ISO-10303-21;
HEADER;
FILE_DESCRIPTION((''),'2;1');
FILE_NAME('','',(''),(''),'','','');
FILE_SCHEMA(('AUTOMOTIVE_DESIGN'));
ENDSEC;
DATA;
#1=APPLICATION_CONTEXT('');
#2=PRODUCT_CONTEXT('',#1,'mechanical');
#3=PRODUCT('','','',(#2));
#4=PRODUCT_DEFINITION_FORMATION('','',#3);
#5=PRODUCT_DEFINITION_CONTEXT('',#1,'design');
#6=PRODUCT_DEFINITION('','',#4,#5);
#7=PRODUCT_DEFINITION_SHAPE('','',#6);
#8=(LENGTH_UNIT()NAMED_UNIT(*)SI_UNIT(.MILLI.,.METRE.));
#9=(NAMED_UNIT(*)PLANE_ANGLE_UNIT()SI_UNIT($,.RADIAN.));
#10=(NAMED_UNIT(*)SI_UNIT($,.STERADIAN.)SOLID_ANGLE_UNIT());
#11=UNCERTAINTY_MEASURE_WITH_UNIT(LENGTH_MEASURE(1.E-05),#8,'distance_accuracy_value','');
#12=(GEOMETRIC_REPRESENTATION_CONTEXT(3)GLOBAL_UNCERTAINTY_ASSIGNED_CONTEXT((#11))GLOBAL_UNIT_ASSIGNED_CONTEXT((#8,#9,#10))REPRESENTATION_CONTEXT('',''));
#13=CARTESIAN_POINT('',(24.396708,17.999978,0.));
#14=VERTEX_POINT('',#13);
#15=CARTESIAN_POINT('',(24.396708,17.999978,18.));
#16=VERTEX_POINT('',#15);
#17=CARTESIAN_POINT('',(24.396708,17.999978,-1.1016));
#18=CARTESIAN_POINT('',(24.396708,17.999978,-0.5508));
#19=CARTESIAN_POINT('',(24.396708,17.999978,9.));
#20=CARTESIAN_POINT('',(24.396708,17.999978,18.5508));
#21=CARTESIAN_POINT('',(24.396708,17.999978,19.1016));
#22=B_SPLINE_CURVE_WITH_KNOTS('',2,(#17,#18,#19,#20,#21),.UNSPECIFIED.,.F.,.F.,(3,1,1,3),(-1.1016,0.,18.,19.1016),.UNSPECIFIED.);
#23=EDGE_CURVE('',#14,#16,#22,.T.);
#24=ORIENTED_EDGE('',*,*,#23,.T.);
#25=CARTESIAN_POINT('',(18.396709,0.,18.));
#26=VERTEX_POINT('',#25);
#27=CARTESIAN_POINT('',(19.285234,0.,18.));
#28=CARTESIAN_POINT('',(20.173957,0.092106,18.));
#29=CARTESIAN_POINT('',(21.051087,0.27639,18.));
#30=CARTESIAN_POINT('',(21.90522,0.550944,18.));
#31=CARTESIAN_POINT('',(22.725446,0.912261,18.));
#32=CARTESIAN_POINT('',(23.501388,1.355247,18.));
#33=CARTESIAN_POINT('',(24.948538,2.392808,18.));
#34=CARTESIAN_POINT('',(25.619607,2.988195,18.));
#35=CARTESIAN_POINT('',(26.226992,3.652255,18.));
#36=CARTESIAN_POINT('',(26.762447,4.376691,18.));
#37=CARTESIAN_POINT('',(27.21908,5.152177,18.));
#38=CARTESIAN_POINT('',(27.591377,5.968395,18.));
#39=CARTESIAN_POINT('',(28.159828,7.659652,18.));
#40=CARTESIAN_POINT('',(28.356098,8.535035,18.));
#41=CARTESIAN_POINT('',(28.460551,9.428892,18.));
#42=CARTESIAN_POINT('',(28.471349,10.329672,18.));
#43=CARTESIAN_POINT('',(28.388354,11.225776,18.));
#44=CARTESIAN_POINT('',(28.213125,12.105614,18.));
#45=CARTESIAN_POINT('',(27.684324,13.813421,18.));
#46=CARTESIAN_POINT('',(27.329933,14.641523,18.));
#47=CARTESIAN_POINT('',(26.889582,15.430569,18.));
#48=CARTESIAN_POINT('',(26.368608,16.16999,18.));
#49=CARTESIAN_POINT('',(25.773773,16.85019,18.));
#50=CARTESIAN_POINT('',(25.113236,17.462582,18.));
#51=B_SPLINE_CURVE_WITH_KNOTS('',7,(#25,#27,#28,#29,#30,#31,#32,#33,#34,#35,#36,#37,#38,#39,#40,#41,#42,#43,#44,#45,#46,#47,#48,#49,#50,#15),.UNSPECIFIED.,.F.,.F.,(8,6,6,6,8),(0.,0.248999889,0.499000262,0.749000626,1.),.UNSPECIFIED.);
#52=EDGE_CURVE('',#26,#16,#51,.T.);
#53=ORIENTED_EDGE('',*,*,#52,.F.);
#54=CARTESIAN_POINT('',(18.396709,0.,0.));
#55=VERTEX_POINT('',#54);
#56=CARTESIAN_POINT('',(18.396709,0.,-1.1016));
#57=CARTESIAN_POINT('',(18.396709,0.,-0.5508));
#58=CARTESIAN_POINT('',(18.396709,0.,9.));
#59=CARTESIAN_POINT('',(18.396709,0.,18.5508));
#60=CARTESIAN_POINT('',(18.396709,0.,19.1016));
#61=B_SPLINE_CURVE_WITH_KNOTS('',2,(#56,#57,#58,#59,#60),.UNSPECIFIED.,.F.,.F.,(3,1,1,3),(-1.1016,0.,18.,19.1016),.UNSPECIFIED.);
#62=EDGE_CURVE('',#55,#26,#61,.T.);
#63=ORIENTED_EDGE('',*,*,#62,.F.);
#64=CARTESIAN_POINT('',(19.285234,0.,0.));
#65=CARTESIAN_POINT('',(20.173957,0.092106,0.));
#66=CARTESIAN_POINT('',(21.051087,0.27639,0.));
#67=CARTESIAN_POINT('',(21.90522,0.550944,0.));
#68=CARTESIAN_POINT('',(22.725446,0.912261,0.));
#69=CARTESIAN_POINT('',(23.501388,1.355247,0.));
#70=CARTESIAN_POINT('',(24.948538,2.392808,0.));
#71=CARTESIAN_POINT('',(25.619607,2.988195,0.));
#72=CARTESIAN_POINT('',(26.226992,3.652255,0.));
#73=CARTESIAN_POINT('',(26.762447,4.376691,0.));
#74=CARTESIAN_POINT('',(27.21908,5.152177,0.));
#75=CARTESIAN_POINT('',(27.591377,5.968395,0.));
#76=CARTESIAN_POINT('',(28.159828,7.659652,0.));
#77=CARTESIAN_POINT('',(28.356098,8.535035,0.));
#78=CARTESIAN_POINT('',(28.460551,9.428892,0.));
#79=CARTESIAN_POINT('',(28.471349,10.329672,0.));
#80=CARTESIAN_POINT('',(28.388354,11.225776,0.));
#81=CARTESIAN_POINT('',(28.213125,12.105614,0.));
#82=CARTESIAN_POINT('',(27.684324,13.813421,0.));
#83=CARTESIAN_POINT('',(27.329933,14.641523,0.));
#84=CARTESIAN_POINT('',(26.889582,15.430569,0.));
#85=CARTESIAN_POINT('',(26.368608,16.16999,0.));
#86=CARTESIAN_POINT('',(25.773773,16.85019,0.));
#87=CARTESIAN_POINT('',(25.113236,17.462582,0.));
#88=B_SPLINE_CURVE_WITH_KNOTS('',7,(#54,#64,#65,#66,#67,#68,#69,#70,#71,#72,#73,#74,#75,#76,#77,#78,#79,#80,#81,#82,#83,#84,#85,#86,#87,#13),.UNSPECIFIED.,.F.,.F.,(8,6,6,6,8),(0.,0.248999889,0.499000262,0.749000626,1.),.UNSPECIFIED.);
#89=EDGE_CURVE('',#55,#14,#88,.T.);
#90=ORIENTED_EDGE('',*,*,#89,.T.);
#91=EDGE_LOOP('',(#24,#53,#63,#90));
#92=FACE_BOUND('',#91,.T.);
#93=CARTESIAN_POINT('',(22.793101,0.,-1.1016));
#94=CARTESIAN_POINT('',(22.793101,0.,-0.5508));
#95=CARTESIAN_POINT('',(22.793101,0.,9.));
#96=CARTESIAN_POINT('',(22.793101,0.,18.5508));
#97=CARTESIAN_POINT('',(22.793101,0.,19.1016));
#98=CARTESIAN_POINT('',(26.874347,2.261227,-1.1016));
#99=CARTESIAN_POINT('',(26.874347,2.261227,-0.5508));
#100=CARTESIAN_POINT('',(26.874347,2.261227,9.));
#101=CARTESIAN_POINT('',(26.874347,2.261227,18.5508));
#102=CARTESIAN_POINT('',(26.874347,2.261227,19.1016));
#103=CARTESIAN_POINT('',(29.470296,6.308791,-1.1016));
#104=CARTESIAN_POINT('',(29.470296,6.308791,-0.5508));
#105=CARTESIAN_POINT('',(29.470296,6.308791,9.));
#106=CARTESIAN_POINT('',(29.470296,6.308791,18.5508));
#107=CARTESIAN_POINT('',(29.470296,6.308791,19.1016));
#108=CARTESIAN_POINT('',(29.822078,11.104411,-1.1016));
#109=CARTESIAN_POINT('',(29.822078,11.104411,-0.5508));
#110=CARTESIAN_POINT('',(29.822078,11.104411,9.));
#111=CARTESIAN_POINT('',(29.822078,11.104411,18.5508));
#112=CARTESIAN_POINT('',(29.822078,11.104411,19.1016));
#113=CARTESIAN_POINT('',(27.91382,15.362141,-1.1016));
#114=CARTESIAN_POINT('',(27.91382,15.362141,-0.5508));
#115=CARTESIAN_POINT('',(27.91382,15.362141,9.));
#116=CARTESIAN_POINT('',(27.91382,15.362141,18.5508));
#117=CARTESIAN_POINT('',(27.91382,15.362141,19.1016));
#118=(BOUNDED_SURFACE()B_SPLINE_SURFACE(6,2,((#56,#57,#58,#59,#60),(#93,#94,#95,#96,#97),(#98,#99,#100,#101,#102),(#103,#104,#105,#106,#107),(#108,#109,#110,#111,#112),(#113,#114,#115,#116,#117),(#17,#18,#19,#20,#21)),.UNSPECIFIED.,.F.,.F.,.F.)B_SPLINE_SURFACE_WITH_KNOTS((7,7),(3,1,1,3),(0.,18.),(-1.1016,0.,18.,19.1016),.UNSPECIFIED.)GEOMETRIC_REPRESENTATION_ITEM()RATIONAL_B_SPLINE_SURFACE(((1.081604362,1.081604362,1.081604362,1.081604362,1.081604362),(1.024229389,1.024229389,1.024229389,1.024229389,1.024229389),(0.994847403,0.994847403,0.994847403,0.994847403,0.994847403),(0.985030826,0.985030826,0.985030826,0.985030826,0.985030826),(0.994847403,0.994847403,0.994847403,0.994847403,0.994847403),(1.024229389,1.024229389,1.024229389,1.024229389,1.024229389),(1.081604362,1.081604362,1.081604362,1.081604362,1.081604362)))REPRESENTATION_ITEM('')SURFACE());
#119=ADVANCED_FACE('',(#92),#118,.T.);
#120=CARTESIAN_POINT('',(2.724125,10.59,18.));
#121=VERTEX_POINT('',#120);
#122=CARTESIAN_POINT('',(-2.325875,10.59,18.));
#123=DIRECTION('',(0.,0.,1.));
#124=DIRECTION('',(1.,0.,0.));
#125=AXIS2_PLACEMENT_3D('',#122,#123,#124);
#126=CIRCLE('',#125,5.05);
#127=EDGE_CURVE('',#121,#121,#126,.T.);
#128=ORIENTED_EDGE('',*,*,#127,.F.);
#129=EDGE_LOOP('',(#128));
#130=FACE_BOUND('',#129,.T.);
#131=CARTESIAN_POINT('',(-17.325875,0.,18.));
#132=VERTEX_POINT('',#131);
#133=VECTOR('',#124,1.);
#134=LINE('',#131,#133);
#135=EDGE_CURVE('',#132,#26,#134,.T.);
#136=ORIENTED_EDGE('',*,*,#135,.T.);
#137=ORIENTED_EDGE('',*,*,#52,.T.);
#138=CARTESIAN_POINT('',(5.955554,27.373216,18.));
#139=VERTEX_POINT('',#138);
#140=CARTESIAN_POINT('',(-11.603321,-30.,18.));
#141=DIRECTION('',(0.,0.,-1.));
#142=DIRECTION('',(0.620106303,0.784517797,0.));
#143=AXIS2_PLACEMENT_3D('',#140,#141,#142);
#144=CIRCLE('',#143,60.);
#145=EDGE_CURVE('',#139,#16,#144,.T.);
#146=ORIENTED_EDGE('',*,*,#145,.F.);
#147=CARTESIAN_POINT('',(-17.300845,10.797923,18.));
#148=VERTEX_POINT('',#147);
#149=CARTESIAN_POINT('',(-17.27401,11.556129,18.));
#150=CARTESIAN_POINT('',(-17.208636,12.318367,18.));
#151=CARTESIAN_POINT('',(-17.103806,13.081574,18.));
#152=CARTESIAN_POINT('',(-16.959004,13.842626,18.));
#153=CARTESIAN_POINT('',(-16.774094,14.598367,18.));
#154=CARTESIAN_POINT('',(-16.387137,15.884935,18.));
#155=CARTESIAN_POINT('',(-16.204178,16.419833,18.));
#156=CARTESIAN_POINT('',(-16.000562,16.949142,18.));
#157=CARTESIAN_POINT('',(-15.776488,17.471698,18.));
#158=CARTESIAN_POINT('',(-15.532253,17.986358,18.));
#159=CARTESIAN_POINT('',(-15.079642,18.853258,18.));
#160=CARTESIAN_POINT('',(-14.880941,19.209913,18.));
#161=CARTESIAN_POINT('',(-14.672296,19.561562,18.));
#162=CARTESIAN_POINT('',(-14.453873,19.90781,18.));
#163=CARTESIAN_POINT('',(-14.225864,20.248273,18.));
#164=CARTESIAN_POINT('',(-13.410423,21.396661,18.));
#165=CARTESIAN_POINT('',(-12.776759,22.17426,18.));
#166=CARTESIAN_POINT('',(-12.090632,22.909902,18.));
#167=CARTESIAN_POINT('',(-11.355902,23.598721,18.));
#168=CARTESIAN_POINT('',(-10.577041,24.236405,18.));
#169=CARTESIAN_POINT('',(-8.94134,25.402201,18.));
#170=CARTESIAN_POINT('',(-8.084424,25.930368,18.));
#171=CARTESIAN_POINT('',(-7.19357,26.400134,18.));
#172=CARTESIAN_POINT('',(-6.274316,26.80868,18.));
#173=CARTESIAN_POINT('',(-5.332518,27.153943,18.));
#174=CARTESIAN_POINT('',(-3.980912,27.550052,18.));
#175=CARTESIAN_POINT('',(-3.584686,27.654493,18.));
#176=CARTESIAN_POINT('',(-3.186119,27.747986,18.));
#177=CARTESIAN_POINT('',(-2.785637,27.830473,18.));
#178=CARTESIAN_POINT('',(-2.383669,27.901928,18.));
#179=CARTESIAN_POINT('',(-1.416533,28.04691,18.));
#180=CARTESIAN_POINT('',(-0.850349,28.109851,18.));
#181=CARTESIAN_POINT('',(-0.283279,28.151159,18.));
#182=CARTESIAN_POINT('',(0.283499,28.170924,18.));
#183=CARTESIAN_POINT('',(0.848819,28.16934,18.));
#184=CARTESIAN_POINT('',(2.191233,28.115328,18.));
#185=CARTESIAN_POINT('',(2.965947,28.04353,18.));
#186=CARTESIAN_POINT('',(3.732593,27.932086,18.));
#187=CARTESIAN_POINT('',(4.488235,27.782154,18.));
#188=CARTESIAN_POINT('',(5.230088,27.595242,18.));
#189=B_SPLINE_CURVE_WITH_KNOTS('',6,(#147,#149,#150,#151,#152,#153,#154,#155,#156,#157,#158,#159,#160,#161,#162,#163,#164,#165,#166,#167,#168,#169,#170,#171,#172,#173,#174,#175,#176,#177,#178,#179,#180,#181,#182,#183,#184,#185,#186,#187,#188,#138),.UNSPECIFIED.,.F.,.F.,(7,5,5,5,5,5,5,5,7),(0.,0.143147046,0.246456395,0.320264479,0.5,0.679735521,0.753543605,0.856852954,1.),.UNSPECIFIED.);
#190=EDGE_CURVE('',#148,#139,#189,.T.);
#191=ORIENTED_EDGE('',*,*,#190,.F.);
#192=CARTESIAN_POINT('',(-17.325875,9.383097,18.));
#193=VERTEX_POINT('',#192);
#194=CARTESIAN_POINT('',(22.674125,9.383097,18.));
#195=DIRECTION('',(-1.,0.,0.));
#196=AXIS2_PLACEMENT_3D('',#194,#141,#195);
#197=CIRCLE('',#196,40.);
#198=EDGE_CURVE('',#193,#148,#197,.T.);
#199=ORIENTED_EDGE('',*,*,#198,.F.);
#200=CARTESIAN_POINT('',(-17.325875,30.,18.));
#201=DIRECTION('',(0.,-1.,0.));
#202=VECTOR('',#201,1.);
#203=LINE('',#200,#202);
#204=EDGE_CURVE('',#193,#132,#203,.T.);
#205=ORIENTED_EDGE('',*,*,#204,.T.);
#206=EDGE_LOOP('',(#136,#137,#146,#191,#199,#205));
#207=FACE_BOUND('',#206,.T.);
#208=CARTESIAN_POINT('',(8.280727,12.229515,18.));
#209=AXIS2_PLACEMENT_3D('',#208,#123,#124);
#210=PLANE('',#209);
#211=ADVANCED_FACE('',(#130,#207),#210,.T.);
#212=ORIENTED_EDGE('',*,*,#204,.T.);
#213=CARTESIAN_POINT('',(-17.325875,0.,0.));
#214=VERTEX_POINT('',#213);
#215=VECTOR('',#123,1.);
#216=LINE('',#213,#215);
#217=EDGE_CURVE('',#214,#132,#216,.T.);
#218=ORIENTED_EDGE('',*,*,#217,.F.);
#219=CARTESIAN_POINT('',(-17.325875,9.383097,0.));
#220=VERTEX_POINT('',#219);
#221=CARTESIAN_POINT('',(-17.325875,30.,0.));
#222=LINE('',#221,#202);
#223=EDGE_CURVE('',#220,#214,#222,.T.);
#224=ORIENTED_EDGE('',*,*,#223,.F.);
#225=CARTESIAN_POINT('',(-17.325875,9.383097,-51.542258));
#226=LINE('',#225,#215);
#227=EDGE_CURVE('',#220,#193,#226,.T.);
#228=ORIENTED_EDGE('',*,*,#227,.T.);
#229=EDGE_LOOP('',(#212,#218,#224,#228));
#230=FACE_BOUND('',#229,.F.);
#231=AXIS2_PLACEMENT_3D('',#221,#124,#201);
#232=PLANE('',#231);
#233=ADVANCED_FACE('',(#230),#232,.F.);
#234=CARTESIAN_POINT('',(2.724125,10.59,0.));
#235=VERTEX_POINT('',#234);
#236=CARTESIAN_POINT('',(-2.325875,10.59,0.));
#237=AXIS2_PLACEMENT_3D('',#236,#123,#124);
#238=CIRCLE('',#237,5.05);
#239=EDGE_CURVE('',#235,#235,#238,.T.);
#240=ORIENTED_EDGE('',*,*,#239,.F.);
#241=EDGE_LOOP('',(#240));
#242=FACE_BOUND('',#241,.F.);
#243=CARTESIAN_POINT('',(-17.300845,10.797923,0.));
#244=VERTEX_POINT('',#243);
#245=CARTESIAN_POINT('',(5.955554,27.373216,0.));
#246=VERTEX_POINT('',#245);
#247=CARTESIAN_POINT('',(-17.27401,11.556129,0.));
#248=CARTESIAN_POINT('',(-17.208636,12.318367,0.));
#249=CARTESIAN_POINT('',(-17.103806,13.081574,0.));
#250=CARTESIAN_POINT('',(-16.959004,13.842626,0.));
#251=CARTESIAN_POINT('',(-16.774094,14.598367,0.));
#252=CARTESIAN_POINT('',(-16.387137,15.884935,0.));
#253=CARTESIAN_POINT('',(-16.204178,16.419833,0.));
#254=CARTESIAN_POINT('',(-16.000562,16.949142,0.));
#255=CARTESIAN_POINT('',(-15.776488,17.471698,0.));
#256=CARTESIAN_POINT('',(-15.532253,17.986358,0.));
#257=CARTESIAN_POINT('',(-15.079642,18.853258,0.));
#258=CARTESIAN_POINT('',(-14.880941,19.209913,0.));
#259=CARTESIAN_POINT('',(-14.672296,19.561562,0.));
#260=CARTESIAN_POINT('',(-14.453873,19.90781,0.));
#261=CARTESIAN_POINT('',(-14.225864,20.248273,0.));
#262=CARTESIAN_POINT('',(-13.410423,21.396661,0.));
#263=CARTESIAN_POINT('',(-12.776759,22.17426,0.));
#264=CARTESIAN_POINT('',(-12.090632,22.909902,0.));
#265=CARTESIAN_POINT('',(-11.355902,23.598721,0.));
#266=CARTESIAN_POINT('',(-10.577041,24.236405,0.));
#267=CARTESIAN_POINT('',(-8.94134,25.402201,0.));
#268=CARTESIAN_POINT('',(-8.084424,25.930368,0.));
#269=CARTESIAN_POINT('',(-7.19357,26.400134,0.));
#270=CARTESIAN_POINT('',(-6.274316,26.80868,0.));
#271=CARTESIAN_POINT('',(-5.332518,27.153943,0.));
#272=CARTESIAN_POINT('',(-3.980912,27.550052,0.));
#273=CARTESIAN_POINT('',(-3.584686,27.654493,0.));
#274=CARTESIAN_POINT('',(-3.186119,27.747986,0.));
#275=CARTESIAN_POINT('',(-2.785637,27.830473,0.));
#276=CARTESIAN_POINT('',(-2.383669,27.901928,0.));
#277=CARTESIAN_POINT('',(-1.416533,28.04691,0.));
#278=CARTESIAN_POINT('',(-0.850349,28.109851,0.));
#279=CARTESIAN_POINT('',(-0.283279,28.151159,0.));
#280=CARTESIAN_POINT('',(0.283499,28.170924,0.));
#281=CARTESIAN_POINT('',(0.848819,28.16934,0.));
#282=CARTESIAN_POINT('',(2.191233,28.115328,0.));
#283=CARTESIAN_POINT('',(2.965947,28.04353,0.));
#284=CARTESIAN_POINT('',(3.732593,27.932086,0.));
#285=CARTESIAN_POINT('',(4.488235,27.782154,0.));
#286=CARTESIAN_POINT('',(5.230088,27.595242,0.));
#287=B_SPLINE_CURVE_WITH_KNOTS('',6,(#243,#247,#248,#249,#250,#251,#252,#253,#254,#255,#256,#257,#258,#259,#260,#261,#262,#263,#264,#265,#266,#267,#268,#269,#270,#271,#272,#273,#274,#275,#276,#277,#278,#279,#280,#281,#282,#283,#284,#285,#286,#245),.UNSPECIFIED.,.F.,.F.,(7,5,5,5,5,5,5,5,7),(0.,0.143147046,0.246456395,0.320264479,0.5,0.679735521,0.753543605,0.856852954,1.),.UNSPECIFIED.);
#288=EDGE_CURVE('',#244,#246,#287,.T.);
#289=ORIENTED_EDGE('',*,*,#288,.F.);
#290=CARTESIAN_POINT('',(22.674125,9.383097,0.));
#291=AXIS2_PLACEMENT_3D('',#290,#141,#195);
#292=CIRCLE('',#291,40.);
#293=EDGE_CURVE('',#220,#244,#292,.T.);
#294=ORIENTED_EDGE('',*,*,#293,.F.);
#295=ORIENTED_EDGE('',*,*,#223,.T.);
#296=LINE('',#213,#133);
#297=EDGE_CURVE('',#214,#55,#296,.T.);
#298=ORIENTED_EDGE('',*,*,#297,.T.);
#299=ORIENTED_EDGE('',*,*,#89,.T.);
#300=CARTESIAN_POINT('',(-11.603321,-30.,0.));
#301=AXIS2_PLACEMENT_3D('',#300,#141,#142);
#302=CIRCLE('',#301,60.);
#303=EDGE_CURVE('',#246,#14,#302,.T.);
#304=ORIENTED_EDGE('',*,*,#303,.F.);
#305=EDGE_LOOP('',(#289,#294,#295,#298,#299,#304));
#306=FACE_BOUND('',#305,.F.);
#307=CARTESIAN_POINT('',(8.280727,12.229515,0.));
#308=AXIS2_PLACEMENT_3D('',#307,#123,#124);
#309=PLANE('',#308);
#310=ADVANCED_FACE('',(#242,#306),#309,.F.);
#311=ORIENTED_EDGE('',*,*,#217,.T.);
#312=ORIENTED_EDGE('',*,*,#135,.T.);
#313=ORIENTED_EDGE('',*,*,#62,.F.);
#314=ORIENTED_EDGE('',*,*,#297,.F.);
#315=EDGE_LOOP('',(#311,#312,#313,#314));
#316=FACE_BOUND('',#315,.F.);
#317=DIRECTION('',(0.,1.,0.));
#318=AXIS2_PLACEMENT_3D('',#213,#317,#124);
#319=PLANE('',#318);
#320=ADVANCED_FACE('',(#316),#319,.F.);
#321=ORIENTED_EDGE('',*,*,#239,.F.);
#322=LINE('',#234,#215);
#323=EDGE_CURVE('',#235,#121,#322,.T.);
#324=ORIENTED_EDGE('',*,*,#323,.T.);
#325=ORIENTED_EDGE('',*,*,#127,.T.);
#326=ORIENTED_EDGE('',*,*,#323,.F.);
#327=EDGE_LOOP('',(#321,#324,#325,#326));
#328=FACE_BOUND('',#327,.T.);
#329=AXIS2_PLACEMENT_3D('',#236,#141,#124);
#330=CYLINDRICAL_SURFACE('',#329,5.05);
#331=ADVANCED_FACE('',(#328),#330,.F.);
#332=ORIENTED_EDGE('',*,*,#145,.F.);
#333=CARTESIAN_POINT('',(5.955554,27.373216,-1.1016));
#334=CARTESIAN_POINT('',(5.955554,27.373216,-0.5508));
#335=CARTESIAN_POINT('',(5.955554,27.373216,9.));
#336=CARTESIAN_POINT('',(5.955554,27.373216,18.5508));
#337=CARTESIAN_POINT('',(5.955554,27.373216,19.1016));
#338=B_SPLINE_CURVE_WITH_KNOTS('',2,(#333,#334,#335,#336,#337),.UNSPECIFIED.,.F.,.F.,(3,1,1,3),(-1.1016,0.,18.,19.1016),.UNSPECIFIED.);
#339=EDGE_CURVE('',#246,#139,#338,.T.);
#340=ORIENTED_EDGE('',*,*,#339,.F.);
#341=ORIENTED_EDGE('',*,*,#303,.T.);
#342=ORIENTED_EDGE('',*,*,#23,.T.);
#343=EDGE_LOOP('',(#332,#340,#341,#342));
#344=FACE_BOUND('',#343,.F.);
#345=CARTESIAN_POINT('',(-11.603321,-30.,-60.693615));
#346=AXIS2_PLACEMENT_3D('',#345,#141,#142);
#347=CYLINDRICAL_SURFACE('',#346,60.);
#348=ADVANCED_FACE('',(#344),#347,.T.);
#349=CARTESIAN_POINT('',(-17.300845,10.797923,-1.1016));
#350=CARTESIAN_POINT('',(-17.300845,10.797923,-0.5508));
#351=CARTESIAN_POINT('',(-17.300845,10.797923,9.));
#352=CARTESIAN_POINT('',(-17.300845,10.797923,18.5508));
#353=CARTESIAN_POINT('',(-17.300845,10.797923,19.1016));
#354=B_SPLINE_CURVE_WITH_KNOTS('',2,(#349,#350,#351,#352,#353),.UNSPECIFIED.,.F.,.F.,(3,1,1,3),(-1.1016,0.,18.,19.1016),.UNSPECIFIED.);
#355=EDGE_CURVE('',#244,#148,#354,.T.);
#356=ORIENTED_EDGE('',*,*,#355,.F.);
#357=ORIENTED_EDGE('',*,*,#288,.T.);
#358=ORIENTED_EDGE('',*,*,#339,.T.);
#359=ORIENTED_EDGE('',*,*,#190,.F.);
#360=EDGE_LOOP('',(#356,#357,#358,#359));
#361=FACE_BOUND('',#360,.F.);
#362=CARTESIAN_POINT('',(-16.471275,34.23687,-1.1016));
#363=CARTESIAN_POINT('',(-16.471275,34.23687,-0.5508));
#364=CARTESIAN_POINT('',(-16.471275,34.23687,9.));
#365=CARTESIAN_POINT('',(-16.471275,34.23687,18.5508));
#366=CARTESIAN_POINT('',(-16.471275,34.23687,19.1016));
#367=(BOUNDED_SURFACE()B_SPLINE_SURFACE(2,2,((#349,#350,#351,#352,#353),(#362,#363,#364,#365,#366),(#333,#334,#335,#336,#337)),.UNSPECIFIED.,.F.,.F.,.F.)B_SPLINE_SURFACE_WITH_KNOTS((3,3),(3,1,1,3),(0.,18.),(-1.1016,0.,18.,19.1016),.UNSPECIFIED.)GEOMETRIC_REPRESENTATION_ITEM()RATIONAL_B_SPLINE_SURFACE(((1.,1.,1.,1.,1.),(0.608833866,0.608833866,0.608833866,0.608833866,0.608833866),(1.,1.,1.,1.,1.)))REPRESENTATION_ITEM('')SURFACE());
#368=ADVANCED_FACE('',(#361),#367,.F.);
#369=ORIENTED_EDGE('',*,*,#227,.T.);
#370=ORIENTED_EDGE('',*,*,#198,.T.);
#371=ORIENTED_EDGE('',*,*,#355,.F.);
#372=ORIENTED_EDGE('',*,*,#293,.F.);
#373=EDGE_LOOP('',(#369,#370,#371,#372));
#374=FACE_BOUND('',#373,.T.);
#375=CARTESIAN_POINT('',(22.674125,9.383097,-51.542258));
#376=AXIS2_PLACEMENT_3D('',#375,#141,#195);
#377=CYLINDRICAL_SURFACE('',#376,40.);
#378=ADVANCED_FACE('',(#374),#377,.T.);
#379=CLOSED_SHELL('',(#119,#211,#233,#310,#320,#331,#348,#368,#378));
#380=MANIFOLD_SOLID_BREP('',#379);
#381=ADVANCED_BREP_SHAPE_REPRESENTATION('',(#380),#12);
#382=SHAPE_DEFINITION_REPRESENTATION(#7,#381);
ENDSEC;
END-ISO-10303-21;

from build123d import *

# Parameters (mm, degrees)
F0_R        = 5.05
F1_DEPTH    = 18
F2_R        = 10
F3_T1_DEPTH = 139.38722981
F4_R        = 9.99999
F5_T1_DEPTH = 121.084516093
F6_R        = 18


# Not quite as in the source:
# - a fillet or chamfer that OpenCascade refuses, or shapes differently, is made with other operations: its cross-section is extruded or revolved along the edge and cut away or added
# - a fillet or chamfer is up to 0.001 mm smaller than in the source, because OpenCascade refuses the exact size


with BuildPart() as f1:
    # F0 (on Top) → F1 (new body)
    with BuildSketch(Plane.XY):
        Polygon((-17.3258748727, 30), (-17.3258748727, 0), (42.6741251273, 0), (12.6741251273, 30), align=None)
        with Locations((-2.3258748727, 10.59)):
            Circle(F0_R, mode=Mode.SUBTRACT)
    extrude(amount=F1_DEPTH)

    # F2
    f2_edges = [f1.edges().sort_by_distance(p)[0] for p in [
        (42.674125, 0, 9),
    ]]
    fillet(f2_edges, radius=F2_R)

    # F3: fillet of radius 60 on 1 edges, made by hand

    # F3_s2 → F3_t1 (cut)
    with BuildSketch(Plane.XY.offset(-60.693614905)):
        with BuildLine():
            ThreePointArc((25.6030573154, 17.0710678119), (8.0910429692, 26.6756740971), (-11.6033208347, 30))
            Line((-11.6033208347, 30), (-11.6033208347, 31.2))
            Line((-11.6033208347, 31.2), (12.6741251273, 31.2))
            Line((12.6741251273, 31.2), (13.5226532647, 30.8485281374))
            ThreePointArc((13.5226532647, 30.8485281374), (19.9871193587, 24.3840620434), (26.3471848784, 18.0124891681))
            Line((26.3471848784, 18.0124891681), (25.6030573154, 17.0710678119))
        make_face()
    extrude(amount=F3_T1_DEPTH, mode=Mode.SUBTRACT)

    # F4 (radius 10 in the source; OpenCascade refuses exactly that, so slightly less here)
    f4_edges = [f1.edges().sort_by_distance(p)[0] for p in [
        (25.603057, 17.071068, 9),
    ]]
    fillet(f4_edges, radius=F4_R)

    # F5: fillet of radius 40 on 1 edges, made by hand

    # F5_s2 → F5_t1 (cut)
    with BuildSketch(Plane.XY.offset(-51.5422580465)):
        with BuildLine():
            ThreePointArc((-17.3258748727, 9.3830967814), (-15.8686941682, 20.0812779708), (-11.6033208347, 30))
            Line((-11.6033208347, 30), (-17.3258748727, 30))
            Line((-17.3258748727, 30), (-17.3258748727, 9.3830967814))
        make_face()
    extrude(amount=F5_T1_DEPTH, mode=Mode.SUBTRACT)

    # F6
    f6_edges = [f1.edges().sort_by_distance(p)[0] for p in [
        (-11.603321, 30, 9),
    ]]
    fillet(f6_edges, radius=F6_R)


solid = f1.part
